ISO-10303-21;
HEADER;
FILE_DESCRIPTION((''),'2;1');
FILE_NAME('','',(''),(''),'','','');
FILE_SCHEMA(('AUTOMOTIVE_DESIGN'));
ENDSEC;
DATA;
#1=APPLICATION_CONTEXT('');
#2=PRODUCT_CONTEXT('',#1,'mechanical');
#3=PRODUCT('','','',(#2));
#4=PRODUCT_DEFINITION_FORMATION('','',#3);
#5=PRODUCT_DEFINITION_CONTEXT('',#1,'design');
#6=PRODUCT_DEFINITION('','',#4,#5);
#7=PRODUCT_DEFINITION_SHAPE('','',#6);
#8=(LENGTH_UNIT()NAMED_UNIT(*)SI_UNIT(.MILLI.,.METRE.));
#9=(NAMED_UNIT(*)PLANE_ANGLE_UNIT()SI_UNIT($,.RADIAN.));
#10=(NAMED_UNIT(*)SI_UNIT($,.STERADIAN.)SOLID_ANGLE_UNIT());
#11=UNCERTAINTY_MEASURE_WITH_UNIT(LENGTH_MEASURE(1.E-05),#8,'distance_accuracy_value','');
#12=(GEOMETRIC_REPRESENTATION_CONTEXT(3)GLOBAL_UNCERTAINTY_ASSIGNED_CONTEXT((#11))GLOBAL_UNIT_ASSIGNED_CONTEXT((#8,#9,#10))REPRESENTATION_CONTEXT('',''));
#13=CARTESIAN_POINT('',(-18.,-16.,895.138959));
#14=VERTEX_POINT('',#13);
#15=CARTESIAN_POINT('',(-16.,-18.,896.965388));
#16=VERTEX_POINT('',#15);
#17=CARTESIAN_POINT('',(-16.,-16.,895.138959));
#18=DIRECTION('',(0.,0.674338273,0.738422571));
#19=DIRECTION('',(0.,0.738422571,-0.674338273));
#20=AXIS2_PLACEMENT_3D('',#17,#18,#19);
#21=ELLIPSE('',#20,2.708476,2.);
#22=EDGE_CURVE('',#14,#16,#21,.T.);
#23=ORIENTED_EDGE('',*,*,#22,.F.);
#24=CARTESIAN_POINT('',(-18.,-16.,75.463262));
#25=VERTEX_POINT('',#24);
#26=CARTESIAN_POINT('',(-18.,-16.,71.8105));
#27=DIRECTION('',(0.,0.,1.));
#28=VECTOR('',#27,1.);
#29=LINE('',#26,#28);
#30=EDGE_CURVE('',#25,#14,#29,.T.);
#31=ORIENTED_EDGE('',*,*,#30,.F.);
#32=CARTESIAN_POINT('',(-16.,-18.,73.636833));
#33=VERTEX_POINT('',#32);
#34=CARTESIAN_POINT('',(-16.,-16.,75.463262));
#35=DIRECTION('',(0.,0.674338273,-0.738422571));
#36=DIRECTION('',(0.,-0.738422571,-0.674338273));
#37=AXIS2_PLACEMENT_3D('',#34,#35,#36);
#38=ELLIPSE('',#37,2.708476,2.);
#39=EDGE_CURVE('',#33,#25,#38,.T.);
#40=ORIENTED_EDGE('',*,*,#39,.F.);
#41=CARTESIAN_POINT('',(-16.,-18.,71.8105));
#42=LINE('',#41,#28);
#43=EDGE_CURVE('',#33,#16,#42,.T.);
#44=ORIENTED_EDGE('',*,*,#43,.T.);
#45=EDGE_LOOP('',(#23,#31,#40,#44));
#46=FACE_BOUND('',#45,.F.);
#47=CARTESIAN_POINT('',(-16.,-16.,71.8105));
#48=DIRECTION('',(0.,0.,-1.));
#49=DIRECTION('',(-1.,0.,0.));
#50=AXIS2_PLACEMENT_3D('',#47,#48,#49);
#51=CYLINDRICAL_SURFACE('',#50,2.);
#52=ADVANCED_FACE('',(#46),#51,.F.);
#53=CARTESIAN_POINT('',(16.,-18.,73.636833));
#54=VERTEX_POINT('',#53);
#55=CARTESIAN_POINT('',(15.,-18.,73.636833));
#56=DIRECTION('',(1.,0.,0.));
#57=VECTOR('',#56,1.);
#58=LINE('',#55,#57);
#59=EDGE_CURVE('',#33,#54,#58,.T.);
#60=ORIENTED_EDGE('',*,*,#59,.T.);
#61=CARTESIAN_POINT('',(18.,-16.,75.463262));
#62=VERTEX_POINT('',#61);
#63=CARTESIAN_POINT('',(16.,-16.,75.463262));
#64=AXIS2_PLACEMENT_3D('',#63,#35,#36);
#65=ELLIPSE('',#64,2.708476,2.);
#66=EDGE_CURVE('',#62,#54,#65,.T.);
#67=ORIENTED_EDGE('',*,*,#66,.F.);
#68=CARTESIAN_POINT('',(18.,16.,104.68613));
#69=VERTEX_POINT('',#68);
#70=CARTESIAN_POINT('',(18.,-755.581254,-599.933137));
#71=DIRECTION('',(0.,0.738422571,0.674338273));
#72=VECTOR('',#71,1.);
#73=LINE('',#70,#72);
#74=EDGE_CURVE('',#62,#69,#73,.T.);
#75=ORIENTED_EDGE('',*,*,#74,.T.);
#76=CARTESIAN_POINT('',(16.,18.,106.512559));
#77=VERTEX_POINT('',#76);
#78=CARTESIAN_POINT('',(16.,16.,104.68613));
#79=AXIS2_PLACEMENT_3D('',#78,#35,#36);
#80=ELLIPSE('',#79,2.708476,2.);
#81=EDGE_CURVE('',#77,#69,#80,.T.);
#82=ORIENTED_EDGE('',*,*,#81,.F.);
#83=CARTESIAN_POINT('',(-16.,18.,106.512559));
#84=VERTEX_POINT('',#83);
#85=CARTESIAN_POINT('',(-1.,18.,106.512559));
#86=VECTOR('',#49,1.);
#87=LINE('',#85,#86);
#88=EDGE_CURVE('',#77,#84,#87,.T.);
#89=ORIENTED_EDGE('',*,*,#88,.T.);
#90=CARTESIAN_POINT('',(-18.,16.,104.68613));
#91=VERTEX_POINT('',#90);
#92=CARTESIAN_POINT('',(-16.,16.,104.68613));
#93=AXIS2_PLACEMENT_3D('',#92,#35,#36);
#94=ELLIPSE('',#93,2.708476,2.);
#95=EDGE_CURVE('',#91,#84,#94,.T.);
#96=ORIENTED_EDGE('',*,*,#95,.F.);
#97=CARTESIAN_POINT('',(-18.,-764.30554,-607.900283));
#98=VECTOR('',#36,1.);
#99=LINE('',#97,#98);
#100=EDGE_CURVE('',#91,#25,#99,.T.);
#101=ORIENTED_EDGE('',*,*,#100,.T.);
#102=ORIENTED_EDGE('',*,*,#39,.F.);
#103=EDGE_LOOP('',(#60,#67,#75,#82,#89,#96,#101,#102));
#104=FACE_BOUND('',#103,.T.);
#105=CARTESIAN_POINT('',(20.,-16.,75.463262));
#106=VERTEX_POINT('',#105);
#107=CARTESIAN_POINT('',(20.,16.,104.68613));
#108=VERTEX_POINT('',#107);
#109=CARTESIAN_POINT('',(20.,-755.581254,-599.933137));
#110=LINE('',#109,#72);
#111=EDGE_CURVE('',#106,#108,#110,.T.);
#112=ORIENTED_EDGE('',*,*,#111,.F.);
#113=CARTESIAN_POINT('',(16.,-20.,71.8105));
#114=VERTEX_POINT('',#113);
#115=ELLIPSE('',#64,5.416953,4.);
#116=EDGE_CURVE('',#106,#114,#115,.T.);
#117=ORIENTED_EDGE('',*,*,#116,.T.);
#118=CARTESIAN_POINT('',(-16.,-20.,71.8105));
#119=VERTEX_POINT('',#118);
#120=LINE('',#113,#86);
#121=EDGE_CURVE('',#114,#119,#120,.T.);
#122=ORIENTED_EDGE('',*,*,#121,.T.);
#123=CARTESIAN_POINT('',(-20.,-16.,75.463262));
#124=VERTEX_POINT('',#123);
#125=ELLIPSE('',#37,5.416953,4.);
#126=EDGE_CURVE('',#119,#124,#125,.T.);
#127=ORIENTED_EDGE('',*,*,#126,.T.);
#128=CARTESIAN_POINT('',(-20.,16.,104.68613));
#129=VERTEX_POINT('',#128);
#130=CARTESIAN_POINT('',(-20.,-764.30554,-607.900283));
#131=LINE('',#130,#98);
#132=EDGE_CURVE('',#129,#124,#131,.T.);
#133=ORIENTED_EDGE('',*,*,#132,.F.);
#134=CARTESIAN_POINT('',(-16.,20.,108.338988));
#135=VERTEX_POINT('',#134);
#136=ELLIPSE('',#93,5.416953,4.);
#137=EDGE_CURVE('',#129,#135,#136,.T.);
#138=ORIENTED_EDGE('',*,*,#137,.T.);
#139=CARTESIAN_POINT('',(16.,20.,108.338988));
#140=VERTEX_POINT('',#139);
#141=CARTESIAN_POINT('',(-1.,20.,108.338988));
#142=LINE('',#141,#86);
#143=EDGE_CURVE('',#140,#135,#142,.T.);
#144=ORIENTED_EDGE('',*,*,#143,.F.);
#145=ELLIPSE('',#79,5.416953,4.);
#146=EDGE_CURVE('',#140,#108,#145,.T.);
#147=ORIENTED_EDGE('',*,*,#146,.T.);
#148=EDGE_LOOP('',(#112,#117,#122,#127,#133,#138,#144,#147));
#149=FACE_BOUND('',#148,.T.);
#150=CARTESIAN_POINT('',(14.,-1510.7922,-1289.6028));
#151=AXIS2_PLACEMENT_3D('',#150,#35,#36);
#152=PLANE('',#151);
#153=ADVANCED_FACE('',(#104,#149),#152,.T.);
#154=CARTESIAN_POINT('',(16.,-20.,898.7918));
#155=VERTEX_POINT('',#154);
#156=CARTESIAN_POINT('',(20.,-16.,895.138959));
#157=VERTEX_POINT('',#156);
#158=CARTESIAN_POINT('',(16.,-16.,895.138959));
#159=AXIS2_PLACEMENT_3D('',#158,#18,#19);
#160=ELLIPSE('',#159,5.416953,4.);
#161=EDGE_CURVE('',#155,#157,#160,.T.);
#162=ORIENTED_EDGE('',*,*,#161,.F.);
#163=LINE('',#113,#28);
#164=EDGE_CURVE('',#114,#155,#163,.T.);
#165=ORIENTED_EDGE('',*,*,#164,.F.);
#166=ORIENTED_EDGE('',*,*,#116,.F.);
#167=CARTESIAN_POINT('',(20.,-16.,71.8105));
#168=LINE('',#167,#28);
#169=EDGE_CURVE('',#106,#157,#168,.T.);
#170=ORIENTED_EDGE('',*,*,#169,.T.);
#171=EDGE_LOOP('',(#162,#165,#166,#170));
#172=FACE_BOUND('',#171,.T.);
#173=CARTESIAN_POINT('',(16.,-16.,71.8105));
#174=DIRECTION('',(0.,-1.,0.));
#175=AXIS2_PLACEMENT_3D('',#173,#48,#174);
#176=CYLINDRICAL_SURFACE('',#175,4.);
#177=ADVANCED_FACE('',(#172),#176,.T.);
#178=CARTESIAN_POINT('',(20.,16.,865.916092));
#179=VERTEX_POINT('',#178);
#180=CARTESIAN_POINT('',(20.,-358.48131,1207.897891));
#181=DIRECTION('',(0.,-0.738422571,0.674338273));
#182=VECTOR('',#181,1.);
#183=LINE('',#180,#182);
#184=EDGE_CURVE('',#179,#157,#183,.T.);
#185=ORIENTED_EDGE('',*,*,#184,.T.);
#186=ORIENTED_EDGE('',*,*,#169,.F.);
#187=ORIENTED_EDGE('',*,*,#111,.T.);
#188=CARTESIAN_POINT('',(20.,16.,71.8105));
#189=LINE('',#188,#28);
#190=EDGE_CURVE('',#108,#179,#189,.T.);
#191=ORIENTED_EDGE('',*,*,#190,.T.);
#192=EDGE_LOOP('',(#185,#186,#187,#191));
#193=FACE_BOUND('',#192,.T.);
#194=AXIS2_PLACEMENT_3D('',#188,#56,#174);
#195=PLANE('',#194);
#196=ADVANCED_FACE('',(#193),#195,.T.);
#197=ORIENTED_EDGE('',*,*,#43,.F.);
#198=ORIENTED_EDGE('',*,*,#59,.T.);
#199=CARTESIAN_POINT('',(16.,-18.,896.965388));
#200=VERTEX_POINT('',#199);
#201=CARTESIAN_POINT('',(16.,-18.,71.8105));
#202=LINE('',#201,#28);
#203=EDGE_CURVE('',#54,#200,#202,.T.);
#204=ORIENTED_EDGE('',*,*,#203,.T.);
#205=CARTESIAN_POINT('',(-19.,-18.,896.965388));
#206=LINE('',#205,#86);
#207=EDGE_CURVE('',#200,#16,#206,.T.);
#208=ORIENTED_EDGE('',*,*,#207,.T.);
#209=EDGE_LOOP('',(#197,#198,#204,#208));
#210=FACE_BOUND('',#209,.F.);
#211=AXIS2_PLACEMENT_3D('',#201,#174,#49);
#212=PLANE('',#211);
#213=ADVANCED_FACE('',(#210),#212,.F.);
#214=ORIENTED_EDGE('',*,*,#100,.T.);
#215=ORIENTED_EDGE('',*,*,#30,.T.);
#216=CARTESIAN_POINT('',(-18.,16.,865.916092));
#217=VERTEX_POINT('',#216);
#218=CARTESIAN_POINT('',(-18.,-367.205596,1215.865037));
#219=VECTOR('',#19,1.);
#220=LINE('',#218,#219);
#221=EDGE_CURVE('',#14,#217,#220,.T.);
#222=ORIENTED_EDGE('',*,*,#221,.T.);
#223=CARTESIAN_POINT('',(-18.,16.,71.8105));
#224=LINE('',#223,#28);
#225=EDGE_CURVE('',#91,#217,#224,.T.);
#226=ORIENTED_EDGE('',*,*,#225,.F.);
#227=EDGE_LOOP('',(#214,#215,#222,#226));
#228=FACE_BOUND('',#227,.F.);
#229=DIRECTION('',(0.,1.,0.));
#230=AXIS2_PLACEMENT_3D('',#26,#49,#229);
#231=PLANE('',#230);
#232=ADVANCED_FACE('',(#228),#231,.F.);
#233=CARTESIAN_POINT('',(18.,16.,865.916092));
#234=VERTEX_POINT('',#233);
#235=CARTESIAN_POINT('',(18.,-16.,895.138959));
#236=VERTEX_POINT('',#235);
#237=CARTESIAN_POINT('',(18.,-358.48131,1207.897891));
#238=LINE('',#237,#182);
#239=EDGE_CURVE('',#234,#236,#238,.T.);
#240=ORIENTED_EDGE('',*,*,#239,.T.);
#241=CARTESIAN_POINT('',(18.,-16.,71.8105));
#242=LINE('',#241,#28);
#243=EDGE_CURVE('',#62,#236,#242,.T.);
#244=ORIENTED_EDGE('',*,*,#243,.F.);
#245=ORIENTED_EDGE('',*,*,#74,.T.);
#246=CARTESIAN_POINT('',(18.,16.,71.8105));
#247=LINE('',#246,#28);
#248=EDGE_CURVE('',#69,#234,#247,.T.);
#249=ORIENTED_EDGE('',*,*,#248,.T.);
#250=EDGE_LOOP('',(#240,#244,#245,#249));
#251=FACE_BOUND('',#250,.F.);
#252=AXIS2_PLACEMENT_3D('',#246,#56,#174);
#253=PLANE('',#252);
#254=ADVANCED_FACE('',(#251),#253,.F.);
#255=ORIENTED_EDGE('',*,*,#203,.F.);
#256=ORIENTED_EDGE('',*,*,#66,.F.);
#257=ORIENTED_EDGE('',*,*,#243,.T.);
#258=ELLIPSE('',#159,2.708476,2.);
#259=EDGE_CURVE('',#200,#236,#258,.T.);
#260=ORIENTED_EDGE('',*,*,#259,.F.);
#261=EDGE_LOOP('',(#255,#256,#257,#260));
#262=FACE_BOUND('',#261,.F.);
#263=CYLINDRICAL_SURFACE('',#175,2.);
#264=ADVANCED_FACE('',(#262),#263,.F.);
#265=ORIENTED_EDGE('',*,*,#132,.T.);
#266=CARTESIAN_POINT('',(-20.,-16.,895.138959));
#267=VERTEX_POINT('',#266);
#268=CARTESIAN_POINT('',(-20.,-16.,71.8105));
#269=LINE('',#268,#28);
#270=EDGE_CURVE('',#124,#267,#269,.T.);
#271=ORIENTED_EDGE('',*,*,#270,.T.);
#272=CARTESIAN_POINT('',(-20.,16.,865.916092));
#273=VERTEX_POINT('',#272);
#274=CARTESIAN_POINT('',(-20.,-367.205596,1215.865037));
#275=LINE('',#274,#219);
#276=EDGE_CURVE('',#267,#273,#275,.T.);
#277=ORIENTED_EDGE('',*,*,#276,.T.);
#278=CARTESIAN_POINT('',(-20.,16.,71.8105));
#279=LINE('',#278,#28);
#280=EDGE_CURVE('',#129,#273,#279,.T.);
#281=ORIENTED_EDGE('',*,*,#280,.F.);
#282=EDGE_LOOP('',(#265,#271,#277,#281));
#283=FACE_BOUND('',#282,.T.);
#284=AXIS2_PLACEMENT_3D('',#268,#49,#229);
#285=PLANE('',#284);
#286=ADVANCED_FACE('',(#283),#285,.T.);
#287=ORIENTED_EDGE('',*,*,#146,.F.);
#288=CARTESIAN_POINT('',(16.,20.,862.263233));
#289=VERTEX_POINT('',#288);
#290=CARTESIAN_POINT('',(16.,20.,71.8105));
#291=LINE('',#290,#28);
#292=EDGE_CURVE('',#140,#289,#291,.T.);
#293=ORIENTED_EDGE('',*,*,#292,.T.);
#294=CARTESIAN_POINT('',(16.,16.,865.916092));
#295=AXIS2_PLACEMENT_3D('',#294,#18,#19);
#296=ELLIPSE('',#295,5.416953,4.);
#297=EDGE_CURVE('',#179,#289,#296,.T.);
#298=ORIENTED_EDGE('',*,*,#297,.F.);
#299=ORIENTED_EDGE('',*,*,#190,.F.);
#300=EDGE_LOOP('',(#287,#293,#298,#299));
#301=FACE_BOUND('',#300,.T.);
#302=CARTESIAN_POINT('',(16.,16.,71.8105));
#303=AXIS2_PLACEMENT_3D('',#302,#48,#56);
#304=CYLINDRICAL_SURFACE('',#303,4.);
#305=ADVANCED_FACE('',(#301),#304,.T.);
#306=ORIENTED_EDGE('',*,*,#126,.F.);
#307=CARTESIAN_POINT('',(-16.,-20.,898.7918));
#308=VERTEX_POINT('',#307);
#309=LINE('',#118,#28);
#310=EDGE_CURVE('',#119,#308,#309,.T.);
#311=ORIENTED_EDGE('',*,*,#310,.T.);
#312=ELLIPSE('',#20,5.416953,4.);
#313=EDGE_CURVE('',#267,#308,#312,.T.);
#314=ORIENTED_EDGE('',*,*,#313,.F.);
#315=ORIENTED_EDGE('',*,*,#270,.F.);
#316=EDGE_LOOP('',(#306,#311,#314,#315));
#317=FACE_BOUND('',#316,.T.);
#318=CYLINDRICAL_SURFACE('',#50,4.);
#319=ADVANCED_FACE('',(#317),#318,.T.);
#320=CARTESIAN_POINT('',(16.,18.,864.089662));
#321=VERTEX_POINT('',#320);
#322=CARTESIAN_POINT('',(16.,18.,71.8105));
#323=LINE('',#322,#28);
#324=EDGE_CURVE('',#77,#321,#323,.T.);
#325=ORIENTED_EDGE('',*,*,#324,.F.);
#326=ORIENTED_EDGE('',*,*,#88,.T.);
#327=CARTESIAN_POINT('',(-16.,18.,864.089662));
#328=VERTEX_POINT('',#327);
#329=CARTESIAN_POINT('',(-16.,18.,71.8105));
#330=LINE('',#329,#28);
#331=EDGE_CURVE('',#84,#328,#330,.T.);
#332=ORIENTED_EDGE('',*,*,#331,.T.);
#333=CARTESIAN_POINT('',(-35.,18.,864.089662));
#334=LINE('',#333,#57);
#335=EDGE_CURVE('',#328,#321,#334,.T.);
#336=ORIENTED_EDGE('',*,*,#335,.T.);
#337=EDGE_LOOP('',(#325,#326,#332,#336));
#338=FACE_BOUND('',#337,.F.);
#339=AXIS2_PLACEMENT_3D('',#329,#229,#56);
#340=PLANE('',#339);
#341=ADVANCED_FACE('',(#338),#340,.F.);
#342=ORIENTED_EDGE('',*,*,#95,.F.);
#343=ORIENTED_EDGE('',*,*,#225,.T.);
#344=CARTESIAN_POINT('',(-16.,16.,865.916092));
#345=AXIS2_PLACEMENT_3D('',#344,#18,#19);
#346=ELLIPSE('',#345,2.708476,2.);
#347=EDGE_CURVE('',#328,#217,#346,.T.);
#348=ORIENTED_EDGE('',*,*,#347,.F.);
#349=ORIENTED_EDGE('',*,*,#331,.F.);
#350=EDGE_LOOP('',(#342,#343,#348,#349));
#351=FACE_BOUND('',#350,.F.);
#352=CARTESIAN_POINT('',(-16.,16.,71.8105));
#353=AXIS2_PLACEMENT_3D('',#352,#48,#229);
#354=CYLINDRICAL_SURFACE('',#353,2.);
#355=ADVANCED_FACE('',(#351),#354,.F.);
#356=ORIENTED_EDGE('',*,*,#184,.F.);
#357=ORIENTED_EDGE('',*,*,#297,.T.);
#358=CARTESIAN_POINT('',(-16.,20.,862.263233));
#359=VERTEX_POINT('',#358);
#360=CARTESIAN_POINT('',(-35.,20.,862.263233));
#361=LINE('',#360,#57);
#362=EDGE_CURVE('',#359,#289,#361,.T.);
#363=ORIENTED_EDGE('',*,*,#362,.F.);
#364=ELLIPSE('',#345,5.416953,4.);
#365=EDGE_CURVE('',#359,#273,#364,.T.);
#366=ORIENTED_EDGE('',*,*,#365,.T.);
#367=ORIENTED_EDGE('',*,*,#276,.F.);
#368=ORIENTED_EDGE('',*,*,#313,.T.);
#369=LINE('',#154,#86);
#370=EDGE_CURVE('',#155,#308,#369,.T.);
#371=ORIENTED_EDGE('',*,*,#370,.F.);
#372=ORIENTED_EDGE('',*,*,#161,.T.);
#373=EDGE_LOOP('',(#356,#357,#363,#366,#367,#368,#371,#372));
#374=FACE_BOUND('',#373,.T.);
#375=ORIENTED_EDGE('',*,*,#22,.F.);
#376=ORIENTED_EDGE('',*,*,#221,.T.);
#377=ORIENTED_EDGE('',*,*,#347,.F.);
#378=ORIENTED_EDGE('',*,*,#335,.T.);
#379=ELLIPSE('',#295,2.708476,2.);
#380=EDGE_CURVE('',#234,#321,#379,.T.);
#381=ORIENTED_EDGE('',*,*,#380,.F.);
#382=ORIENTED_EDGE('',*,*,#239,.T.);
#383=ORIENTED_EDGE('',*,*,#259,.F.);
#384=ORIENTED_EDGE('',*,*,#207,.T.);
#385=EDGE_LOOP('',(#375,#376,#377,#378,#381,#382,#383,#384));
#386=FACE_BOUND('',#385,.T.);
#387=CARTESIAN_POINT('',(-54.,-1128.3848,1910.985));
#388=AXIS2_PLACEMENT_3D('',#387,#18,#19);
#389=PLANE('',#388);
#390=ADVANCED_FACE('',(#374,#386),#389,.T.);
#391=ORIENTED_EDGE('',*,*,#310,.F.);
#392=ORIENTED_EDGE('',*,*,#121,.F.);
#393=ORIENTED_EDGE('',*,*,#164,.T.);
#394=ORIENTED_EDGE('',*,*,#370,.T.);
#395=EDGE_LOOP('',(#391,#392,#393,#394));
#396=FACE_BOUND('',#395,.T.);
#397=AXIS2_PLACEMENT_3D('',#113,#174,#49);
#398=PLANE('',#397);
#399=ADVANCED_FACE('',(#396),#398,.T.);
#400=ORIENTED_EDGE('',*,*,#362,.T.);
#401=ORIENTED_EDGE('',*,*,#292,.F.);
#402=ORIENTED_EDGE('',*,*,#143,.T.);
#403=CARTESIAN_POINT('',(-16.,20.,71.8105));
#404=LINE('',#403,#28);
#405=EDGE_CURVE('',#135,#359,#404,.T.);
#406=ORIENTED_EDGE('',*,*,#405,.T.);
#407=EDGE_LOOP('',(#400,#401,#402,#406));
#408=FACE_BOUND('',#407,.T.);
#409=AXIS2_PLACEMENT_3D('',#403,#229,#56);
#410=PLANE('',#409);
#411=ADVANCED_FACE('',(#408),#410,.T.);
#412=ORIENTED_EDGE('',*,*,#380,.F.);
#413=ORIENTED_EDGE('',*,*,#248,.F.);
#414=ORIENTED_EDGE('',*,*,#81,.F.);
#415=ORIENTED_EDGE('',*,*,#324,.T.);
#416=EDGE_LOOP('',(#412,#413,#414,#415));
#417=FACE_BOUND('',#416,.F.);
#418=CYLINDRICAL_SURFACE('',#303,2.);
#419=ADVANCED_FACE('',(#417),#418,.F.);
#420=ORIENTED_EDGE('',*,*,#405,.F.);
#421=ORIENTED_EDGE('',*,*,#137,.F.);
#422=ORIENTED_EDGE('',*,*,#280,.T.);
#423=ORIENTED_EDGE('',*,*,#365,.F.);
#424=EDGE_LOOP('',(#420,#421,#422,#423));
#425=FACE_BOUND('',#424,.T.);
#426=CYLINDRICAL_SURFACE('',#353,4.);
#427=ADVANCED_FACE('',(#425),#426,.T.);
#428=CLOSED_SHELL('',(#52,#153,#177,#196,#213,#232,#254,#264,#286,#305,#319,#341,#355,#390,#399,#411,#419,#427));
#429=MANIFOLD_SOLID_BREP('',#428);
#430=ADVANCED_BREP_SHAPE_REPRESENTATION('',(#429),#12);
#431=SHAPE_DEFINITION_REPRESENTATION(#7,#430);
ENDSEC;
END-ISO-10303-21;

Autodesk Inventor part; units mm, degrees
ref_plane "Start Plane" through (0, 0, 71.8105) normal (0, 0, 1) x (1, 0, 0)
ref_plane "End Plane" through (0, 0, 898.7917) normal (0, 0, 1) x (1, 0, 0)
sketch "Sketch" plane through (0, 0, 0) normal (0, 0, 1) x (1, 0, 0)
  line L0 (-20, -16) -> (-20, 16)
  line L1 (-16, 20) -> (16, 20)
  line L2 (20, 16) -> (20, -16)
  line L3 (16, -20) -> (-16, -20)
  arc A0 (-20, -16) -> (-16, -20) centre (-16, -16) ccw
  arc A1 (20, 16) -> (16, 20) centre (16, 16) ccw
  arc A2 (-16, 20) -> (-20, 16) centre (-16, 16) ccw
  arc A3 (16, -20) -> (20, -16) centre (16, -16) ccw
  arc A4 (-16, 18) -> (-18, 16) centre (-16, 16) ccw
  line L4 (-16, 18) -> (16, 18)
  arc A5 (18, 16) -> (16, 18) centre (16, 16) ccw
  line L5 (18, 16) -> (18, -16)
  arc A6 (16, -18) -> (18, -16) centre (16, -16) ccw
  line L6 (16, -18) -> (-16, -18)
  arc A7 (-18, -16) -> (-16, -18) centre (-16, -16) ccw
  line L7 (-18, -16) -> (-18, 16)
  line L8 (0, 29.1598) -> (0, -29.1598) construction
  line L9 (-29.1598, 0) -> (29.1598, 0) construction
  dimension "d7" = 4
  dimension "d9" = 40
  dimension "d11" = 40
  dimension "d12" = 2
  dimension "d15" = 20
  dimension "d16" = 20
extrude "Body" add sketch "Sketch" along normal up to surface (826.9813 mm away) from surface at 71.8105
sketch "Sketch3" plane through (0, 0, 0) normal (0, 0, 1) x (1, 0, 0)
  line L0 (0, 0) -> (10, 0)
ref_plane "Work Plane3" through (0, 0, 0) normal (0, -1, 0) x (1, 0, 0)
ref_plane "Work Plane4" through (-54, -1128.3848, 1910.985) normal (0, 0.6743383, 0.7384226) x (1, 0, 0)
split "Split1" plane through (-54, -1128.3848, 1910.985) removes the side toward (0, 0.6743383, 0.7384226)
ref_plane "Work Plane5" through (14, -1510.7922, -1289.6028) normal (0, 0.6743383, -0.7384226) x (1, 0, 0)
split "Split2" plane through (14, -1510.7922, -1289.6028) removes the side toward (0, 0.6743383, -0.7384226)
sketch "Sketch4" plane through (0, 0, 0) normal (0, -1, 0) x (1, 0, 0)
  line L0 (-2, 71.8105) -> (12, 71.8105) projected
  line L1 (-2, 898.7917) -> (12, 898.7917) projected
  dimension "d18" = 826.9813
equation "\"d7\" = G_IR"
equation "\"d9\" = G_W"
equation "\"d11\" = G_H"
equation "\"d12\" = G_T"
equation "\"d15\" = 0.5 * d9"
equation "\"d16\" = 0.5 * d11"
equation "\"d3\" = G_L"
equation "\"G_W\" = 40"
equation "\"G_H\" = 40"
equation "\"G_T\" = 2"
equation "\"G_IR\" = 4"
equation "\"G_L\" = d18"
equation "\"G_OFFSET_START\" = -71.81047"
equation "\"G_OFFSET_END\" = -180.14952"
equation "\"d13\" = -G_OFFSET_START"
equation "\"d14\" = G_OFFSET_END + B_L"
equation "\"B_L\" = 1078.94126"
properties part number "ISO 10799-2 - 40x40x2 - 826,98" material "Steel, Mild"
